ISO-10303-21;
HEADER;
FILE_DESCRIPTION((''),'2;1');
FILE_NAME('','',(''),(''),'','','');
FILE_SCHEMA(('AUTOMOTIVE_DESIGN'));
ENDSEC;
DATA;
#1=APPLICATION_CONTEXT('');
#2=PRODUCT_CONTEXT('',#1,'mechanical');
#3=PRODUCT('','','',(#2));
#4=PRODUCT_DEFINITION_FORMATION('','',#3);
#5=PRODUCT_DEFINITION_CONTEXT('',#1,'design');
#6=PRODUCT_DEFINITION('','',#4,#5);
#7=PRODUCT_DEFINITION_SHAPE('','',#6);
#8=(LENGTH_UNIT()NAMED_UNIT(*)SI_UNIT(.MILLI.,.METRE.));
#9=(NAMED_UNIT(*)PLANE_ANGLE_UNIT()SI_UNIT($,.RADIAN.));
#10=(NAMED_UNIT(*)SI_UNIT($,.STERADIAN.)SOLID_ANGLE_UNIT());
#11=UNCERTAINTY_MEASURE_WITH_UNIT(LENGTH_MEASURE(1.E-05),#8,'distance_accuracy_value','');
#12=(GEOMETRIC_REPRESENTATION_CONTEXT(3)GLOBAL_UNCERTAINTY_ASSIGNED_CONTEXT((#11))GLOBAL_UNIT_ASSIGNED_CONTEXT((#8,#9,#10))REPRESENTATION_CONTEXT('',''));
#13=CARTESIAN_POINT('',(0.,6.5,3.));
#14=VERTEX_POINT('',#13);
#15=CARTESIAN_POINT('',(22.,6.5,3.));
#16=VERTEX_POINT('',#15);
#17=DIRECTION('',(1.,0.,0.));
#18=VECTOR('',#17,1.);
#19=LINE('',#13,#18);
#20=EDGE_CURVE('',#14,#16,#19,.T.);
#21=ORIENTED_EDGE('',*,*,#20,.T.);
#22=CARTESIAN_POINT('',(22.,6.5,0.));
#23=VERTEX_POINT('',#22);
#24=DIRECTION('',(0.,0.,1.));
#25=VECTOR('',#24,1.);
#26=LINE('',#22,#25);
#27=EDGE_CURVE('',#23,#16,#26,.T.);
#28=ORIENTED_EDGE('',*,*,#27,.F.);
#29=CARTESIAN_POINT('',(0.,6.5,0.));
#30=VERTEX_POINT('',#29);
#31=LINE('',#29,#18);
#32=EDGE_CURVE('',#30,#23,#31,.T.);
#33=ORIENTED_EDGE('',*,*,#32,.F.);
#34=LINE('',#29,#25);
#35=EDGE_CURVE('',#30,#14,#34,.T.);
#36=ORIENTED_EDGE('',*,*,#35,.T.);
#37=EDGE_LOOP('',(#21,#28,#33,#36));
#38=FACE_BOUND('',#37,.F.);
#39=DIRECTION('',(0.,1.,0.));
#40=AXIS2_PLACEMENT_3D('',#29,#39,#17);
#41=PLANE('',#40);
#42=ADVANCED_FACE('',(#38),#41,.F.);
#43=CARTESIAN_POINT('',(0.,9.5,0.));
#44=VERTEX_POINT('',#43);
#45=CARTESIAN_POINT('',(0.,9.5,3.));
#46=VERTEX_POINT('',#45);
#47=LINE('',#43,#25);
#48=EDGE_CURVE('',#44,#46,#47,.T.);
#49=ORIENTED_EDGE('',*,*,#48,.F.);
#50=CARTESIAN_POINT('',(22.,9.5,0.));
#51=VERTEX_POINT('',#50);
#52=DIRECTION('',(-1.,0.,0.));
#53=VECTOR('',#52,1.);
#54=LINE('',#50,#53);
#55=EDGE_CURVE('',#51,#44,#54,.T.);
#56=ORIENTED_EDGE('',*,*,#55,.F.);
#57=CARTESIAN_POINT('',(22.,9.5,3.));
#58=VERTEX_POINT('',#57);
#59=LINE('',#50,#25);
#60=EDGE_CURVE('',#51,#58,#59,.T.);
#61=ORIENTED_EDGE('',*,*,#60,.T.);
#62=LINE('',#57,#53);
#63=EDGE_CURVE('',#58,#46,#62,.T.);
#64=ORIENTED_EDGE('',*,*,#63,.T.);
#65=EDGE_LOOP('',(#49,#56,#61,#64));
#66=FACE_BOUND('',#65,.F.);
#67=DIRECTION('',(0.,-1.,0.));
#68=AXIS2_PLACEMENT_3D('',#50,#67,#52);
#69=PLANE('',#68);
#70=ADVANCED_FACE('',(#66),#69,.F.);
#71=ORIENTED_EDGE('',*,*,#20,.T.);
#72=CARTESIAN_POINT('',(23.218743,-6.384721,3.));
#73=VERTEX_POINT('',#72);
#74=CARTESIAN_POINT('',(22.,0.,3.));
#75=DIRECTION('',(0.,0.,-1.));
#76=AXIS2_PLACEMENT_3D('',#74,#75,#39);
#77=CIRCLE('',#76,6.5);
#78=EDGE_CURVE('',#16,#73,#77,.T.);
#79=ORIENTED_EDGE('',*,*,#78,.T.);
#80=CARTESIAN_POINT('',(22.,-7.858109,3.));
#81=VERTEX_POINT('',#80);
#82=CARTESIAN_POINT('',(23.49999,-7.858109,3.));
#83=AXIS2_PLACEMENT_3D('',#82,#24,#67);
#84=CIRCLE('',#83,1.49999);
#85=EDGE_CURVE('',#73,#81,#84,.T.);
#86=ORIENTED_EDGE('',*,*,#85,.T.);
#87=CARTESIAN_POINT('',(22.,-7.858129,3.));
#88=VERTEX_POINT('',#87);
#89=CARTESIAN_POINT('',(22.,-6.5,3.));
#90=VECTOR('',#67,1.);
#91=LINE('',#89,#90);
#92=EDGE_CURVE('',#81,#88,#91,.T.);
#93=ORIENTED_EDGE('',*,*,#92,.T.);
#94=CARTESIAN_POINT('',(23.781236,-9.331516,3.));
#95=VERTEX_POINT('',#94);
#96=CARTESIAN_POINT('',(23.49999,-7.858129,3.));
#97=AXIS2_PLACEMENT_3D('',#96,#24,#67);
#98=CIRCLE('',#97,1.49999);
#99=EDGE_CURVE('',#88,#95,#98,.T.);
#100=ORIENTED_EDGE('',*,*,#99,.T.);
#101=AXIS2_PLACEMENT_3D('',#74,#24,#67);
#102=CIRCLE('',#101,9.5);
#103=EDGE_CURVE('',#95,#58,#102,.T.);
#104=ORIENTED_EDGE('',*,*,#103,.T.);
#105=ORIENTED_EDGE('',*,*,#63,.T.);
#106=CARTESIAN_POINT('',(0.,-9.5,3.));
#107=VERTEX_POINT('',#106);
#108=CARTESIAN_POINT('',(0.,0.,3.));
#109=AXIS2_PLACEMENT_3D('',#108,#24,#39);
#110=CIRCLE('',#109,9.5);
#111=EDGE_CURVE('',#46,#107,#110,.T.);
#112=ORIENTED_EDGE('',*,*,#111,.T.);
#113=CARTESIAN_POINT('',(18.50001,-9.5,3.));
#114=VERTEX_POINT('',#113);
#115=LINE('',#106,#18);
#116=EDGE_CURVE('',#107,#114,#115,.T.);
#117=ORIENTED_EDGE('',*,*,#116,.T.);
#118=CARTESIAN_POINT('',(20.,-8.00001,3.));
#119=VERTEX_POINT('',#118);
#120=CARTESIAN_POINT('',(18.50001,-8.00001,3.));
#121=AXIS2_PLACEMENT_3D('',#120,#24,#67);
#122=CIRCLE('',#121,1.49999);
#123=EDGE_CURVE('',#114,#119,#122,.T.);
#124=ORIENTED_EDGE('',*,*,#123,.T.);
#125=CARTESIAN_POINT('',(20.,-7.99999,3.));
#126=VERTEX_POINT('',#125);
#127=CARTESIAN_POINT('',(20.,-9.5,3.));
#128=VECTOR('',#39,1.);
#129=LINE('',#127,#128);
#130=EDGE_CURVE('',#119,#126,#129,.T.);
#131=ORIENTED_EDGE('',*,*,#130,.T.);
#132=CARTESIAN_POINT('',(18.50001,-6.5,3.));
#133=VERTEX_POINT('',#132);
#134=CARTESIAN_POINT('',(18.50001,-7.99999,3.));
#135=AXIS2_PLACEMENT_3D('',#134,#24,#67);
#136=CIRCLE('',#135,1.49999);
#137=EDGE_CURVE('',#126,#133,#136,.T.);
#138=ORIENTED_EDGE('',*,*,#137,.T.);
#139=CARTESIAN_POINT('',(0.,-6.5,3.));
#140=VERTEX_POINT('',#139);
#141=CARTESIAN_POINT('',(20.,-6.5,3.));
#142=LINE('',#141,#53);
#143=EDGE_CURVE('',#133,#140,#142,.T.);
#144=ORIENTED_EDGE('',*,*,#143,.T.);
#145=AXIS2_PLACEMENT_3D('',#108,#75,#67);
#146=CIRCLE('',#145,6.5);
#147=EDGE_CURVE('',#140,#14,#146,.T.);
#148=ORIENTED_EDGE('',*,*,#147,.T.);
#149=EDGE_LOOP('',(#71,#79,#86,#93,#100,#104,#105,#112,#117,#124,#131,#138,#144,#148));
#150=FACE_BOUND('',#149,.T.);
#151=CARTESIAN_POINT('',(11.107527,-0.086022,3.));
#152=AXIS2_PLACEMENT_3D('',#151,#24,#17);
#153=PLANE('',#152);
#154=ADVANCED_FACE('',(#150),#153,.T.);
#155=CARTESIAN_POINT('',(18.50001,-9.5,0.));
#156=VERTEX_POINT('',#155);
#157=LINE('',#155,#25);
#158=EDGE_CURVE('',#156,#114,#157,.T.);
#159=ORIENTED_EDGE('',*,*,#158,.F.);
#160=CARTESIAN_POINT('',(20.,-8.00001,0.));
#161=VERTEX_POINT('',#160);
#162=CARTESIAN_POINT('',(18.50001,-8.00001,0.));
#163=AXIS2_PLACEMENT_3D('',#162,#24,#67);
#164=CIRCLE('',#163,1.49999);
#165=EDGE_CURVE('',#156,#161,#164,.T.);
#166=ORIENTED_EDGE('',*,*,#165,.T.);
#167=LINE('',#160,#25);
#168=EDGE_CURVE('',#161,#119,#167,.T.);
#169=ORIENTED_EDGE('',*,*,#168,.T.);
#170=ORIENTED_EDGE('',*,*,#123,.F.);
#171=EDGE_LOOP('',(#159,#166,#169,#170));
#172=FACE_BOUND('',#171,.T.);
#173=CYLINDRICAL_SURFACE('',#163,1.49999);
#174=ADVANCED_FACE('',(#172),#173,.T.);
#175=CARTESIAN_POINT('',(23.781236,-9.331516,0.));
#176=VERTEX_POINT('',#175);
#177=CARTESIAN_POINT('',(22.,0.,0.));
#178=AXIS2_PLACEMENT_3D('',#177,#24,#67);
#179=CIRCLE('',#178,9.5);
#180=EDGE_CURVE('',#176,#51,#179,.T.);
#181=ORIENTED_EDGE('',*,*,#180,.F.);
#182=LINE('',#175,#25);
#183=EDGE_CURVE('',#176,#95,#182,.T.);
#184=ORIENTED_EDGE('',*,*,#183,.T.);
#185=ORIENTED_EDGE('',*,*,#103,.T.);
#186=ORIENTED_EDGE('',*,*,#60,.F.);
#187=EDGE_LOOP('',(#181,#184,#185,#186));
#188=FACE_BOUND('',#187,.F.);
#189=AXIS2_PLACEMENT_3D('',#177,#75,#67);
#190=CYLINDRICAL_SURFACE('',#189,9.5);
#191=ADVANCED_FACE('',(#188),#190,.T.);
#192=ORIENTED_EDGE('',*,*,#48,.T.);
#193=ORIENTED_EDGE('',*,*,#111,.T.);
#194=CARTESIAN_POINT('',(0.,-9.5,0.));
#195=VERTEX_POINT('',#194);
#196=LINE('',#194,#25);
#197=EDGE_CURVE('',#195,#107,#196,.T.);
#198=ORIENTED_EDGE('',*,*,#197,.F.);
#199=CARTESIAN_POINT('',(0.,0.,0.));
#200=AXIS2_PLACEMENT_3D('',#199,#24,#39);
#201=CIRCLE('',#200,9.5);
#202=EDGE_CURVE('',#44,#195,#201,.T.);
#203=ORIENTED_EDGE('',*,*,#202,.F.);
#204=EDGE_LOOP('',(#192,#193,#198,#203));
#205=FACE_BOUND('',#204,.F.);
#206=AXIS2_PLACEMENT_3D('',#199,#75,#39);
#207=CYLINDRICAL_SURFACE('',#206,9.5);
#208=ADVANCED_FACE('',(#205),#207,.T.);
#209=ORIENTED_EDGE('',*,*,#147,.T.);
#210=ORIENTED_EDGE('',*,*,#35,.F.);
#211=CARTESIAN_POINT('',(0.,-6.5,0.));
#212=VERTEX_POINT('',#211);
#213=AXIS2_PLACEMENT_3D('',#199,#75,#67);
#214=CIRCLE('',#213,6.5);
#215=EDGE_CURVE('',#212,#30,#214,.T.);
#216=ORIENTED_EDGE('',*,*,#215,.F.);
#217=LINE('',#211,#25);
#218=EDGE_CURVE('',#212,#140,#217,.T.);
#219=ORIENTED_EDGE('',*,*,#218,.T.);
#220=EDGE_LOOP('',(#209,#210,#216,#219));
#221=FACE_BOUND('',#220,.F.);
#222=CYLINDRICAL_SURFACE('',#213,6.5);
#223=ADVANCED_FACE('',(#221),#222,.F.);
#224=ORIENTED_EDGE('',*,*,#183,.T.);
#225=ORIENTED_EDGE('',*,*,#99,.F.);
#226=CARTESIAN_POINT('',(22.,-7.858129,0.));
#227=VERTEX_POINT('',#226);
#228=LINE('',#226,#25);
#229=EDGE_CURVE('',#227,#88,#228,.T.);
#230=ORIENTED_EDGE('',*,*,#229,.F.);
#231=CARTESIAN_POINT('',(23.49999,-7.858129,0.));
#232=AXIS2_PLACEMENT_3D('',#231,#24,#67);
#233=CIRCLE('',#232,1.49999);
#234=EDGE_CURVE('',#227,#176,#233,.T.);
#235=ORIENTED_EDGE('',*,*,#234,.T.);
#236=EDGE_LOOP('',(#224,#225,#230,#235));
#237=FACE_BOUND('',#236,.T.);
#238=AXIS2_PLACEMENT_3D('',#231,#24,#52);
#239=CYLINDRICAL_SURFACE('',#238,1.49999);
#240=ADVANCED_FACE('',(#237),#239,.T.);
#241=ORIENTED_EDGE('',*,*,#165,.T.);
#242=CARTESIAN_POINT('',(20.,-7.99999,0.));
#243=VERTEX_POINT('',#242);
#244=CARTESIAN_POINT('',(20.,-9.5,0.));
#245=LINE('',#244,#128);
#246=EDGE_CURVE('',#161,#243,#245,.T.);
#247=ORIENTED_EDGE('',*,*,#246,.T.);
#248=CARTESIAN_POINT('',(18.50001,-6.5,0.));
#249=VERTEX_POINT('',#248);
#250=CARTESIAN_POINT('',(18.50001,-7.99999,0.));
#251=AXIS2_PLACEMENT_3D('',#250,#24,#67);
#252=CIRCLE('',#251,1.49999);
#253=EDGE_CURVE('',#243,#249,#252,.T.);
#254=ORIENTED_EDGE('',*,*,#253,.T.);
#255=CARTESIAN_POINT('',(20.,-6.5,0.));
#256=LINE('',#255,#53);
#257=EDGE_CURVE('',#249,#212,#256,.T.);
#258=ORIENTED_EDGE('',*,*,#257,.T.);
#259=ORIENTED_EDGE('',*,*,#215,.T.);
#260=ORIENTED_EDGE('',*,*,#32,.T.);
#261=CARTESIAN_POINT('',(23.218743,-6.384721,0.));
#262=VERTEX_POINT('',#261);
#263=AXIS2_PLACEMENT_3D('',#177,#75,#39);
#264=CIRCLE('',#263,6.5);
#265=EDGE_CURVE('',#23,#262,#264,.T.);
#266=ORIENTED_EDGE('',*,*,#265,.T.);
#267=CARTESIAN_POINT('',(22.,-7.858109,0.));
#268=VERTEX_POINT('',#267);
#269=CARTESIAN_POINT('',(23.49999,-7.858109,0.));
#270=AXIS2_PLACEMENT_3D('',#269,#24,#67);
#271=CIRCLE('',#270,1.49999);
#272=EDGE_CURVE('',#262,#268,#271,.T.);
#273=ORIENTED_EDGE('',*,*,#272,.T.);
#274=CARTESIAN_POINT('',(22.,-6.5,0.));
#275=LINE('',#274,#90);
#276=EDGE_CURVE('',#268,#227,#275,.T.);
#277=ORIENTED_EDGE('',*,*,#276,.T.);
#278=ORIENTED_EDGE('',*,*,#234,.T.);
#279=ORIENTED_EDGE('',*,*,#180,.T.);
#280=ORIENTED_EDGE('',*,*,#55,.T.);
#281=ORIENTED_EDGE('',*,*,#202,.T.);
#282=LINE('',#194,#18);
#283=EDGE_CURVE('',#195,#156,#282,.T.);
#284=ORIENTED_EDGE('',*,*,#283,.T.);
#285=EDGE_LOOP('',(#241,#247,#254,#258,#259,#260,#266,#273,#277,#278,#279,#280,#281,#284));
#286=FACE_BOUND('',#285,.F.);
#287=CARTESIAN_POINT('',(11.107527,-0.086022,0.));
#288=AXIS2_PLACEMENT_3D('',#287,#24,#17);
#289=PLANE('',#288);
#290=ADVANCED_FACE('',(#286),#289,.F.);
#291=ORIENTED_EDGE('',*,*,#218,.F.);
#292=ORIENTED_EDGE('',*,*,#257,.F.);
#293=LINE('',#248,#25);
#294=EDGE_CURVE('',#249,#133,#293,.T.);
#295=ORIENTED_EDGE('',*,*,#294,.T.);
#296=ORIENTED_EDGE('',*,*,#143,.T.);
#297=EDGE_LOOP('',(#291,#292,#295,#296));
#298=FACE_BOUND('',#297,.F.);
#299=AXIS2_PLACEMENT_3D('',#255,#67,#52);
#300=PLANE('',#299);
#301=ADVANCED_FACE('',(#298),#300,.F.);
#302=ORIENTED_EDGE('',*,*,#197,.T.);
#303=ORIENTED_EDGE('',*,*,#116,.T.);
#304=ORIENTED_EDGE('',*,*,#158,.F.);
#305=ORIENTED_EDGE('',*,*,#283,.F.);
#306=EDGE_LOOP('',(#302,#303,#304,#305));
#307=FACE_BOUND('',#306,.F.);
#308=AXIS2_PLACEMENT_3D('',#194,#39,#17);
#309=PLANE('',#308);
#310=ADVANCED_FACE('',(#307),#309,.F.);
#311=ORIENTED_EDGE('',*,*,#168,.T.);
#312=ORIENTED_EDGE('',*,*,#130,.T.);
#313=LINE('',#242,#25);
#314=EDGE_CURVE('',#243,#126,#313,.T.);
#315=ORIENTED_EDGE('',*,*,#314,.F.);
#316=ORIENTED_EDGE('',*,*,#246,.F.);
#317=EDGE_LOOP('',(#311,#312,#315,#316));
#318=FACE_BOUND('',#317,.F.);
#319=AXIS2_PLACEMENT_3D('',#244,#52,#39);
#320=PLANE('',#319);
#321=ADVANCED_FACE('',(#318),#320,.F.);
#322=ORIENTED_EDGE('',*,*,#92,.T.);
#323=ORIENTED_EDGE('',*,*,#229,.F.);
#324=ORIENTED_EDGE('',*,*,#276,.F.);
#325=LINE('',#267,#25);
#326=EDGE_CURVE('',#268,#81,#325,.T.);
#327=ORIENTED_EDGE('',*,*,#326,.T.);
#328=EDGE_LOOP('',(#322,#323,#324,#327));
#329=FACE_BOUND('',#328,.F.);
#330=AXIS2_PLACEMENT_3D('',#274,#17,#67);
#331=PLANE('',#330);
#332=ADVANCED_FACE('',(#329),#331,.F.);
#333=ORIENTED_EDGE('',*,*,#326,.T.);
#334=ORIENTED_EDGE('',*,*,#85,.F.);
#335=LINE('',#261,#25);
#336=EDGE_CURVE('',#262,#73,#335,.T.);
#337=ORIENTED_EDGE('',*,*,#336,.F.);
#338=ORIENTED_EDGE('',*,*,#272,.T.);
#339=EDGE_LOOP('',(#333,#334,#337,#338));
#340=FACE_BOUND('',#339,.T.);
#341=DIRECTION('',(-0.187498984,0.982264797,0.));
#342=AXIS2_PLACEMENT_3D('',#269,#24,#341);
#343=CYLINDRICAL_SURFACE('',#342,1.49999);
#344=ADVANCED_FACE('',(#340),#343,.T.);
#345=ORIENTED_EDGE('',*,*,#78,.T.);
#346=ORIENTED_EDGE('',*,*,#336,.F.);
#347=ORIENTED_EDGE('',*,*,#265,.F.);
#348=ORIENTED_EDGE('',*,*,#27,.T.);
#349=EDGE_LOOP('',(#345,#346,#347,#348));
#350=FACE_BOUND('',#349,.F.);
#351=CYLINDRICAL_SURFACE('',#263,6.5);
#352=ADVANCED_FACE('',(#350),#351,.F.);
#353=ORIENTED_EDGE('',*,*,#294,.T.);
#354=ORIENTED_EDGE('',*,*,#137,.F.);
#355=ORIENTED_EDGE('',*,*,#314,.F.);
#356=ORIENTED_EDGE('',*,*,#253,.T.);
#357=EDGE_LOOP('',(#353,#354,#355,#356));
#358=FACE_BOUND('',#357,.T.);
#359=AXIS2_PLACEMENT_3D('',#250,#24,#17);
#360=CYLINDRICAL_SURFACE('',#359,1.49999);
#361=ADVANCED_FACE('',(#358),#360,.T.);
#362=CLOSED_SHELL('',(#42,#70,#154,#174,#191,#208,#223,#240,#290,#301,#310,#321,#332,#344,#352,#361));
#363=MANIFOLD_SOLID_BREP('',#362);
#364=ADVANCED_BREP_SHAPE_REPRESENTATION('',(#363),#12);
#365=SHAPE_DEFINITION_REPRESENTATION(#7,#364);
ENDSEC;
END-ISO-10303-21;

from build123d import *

# Parameters (mm, degrees)
F1_DEPTH = 3
F2_R     = 1.49999


# Not quite as in the source:
# - a fillet or chamfer is up to 0.001 mm smaller than in the source, because OpenCascade refuses the exact size


with BuildPart() as f1:
    # F0 (on Top) → F1 (new body)
    with BuildSketch(Plane.XY):
        with BuildLine():
            ThreePointArc((0, -6.5), (-6.5, 0), (0, 6.5))
            Line((0, 6.5), (22, 6.5))
            ThreePointArc((22, 6.5), (28.5, 0), (22, -6.5))
            Line((22, -6.5), (22, -9.5))
            ThreePointArc((22, -9.5), (31.5, 0), (22, 9.5))
            Line((22, 9.5), (0, 9.5))
            ThreePointArc((0, 9.5), (-9.5, 0), (0, -9.5))
            Line((0, -9.5), (20, -9.5))
            Line((20, -9.5), (20, -6.5))
            Line((20, -6.5), (0, -6.5))
        make_face()
    extrude(amount=F1_DEPTH)

    # F2 (radius 1.5 in the source; OpenCascade refuses exactly that, so slightly less here)
    f2_edges = [f1.edges().sort_by_distance(p)[0] for p in [
        (20, -9.5, 1.5),
        (20, -6.5, 1.5),
        (22, -6.5, 1.5),
        (22, -9.5, 1.5),
    ]]
    fillet(f2_edges, radius=F2_R)


solid = f1.part
